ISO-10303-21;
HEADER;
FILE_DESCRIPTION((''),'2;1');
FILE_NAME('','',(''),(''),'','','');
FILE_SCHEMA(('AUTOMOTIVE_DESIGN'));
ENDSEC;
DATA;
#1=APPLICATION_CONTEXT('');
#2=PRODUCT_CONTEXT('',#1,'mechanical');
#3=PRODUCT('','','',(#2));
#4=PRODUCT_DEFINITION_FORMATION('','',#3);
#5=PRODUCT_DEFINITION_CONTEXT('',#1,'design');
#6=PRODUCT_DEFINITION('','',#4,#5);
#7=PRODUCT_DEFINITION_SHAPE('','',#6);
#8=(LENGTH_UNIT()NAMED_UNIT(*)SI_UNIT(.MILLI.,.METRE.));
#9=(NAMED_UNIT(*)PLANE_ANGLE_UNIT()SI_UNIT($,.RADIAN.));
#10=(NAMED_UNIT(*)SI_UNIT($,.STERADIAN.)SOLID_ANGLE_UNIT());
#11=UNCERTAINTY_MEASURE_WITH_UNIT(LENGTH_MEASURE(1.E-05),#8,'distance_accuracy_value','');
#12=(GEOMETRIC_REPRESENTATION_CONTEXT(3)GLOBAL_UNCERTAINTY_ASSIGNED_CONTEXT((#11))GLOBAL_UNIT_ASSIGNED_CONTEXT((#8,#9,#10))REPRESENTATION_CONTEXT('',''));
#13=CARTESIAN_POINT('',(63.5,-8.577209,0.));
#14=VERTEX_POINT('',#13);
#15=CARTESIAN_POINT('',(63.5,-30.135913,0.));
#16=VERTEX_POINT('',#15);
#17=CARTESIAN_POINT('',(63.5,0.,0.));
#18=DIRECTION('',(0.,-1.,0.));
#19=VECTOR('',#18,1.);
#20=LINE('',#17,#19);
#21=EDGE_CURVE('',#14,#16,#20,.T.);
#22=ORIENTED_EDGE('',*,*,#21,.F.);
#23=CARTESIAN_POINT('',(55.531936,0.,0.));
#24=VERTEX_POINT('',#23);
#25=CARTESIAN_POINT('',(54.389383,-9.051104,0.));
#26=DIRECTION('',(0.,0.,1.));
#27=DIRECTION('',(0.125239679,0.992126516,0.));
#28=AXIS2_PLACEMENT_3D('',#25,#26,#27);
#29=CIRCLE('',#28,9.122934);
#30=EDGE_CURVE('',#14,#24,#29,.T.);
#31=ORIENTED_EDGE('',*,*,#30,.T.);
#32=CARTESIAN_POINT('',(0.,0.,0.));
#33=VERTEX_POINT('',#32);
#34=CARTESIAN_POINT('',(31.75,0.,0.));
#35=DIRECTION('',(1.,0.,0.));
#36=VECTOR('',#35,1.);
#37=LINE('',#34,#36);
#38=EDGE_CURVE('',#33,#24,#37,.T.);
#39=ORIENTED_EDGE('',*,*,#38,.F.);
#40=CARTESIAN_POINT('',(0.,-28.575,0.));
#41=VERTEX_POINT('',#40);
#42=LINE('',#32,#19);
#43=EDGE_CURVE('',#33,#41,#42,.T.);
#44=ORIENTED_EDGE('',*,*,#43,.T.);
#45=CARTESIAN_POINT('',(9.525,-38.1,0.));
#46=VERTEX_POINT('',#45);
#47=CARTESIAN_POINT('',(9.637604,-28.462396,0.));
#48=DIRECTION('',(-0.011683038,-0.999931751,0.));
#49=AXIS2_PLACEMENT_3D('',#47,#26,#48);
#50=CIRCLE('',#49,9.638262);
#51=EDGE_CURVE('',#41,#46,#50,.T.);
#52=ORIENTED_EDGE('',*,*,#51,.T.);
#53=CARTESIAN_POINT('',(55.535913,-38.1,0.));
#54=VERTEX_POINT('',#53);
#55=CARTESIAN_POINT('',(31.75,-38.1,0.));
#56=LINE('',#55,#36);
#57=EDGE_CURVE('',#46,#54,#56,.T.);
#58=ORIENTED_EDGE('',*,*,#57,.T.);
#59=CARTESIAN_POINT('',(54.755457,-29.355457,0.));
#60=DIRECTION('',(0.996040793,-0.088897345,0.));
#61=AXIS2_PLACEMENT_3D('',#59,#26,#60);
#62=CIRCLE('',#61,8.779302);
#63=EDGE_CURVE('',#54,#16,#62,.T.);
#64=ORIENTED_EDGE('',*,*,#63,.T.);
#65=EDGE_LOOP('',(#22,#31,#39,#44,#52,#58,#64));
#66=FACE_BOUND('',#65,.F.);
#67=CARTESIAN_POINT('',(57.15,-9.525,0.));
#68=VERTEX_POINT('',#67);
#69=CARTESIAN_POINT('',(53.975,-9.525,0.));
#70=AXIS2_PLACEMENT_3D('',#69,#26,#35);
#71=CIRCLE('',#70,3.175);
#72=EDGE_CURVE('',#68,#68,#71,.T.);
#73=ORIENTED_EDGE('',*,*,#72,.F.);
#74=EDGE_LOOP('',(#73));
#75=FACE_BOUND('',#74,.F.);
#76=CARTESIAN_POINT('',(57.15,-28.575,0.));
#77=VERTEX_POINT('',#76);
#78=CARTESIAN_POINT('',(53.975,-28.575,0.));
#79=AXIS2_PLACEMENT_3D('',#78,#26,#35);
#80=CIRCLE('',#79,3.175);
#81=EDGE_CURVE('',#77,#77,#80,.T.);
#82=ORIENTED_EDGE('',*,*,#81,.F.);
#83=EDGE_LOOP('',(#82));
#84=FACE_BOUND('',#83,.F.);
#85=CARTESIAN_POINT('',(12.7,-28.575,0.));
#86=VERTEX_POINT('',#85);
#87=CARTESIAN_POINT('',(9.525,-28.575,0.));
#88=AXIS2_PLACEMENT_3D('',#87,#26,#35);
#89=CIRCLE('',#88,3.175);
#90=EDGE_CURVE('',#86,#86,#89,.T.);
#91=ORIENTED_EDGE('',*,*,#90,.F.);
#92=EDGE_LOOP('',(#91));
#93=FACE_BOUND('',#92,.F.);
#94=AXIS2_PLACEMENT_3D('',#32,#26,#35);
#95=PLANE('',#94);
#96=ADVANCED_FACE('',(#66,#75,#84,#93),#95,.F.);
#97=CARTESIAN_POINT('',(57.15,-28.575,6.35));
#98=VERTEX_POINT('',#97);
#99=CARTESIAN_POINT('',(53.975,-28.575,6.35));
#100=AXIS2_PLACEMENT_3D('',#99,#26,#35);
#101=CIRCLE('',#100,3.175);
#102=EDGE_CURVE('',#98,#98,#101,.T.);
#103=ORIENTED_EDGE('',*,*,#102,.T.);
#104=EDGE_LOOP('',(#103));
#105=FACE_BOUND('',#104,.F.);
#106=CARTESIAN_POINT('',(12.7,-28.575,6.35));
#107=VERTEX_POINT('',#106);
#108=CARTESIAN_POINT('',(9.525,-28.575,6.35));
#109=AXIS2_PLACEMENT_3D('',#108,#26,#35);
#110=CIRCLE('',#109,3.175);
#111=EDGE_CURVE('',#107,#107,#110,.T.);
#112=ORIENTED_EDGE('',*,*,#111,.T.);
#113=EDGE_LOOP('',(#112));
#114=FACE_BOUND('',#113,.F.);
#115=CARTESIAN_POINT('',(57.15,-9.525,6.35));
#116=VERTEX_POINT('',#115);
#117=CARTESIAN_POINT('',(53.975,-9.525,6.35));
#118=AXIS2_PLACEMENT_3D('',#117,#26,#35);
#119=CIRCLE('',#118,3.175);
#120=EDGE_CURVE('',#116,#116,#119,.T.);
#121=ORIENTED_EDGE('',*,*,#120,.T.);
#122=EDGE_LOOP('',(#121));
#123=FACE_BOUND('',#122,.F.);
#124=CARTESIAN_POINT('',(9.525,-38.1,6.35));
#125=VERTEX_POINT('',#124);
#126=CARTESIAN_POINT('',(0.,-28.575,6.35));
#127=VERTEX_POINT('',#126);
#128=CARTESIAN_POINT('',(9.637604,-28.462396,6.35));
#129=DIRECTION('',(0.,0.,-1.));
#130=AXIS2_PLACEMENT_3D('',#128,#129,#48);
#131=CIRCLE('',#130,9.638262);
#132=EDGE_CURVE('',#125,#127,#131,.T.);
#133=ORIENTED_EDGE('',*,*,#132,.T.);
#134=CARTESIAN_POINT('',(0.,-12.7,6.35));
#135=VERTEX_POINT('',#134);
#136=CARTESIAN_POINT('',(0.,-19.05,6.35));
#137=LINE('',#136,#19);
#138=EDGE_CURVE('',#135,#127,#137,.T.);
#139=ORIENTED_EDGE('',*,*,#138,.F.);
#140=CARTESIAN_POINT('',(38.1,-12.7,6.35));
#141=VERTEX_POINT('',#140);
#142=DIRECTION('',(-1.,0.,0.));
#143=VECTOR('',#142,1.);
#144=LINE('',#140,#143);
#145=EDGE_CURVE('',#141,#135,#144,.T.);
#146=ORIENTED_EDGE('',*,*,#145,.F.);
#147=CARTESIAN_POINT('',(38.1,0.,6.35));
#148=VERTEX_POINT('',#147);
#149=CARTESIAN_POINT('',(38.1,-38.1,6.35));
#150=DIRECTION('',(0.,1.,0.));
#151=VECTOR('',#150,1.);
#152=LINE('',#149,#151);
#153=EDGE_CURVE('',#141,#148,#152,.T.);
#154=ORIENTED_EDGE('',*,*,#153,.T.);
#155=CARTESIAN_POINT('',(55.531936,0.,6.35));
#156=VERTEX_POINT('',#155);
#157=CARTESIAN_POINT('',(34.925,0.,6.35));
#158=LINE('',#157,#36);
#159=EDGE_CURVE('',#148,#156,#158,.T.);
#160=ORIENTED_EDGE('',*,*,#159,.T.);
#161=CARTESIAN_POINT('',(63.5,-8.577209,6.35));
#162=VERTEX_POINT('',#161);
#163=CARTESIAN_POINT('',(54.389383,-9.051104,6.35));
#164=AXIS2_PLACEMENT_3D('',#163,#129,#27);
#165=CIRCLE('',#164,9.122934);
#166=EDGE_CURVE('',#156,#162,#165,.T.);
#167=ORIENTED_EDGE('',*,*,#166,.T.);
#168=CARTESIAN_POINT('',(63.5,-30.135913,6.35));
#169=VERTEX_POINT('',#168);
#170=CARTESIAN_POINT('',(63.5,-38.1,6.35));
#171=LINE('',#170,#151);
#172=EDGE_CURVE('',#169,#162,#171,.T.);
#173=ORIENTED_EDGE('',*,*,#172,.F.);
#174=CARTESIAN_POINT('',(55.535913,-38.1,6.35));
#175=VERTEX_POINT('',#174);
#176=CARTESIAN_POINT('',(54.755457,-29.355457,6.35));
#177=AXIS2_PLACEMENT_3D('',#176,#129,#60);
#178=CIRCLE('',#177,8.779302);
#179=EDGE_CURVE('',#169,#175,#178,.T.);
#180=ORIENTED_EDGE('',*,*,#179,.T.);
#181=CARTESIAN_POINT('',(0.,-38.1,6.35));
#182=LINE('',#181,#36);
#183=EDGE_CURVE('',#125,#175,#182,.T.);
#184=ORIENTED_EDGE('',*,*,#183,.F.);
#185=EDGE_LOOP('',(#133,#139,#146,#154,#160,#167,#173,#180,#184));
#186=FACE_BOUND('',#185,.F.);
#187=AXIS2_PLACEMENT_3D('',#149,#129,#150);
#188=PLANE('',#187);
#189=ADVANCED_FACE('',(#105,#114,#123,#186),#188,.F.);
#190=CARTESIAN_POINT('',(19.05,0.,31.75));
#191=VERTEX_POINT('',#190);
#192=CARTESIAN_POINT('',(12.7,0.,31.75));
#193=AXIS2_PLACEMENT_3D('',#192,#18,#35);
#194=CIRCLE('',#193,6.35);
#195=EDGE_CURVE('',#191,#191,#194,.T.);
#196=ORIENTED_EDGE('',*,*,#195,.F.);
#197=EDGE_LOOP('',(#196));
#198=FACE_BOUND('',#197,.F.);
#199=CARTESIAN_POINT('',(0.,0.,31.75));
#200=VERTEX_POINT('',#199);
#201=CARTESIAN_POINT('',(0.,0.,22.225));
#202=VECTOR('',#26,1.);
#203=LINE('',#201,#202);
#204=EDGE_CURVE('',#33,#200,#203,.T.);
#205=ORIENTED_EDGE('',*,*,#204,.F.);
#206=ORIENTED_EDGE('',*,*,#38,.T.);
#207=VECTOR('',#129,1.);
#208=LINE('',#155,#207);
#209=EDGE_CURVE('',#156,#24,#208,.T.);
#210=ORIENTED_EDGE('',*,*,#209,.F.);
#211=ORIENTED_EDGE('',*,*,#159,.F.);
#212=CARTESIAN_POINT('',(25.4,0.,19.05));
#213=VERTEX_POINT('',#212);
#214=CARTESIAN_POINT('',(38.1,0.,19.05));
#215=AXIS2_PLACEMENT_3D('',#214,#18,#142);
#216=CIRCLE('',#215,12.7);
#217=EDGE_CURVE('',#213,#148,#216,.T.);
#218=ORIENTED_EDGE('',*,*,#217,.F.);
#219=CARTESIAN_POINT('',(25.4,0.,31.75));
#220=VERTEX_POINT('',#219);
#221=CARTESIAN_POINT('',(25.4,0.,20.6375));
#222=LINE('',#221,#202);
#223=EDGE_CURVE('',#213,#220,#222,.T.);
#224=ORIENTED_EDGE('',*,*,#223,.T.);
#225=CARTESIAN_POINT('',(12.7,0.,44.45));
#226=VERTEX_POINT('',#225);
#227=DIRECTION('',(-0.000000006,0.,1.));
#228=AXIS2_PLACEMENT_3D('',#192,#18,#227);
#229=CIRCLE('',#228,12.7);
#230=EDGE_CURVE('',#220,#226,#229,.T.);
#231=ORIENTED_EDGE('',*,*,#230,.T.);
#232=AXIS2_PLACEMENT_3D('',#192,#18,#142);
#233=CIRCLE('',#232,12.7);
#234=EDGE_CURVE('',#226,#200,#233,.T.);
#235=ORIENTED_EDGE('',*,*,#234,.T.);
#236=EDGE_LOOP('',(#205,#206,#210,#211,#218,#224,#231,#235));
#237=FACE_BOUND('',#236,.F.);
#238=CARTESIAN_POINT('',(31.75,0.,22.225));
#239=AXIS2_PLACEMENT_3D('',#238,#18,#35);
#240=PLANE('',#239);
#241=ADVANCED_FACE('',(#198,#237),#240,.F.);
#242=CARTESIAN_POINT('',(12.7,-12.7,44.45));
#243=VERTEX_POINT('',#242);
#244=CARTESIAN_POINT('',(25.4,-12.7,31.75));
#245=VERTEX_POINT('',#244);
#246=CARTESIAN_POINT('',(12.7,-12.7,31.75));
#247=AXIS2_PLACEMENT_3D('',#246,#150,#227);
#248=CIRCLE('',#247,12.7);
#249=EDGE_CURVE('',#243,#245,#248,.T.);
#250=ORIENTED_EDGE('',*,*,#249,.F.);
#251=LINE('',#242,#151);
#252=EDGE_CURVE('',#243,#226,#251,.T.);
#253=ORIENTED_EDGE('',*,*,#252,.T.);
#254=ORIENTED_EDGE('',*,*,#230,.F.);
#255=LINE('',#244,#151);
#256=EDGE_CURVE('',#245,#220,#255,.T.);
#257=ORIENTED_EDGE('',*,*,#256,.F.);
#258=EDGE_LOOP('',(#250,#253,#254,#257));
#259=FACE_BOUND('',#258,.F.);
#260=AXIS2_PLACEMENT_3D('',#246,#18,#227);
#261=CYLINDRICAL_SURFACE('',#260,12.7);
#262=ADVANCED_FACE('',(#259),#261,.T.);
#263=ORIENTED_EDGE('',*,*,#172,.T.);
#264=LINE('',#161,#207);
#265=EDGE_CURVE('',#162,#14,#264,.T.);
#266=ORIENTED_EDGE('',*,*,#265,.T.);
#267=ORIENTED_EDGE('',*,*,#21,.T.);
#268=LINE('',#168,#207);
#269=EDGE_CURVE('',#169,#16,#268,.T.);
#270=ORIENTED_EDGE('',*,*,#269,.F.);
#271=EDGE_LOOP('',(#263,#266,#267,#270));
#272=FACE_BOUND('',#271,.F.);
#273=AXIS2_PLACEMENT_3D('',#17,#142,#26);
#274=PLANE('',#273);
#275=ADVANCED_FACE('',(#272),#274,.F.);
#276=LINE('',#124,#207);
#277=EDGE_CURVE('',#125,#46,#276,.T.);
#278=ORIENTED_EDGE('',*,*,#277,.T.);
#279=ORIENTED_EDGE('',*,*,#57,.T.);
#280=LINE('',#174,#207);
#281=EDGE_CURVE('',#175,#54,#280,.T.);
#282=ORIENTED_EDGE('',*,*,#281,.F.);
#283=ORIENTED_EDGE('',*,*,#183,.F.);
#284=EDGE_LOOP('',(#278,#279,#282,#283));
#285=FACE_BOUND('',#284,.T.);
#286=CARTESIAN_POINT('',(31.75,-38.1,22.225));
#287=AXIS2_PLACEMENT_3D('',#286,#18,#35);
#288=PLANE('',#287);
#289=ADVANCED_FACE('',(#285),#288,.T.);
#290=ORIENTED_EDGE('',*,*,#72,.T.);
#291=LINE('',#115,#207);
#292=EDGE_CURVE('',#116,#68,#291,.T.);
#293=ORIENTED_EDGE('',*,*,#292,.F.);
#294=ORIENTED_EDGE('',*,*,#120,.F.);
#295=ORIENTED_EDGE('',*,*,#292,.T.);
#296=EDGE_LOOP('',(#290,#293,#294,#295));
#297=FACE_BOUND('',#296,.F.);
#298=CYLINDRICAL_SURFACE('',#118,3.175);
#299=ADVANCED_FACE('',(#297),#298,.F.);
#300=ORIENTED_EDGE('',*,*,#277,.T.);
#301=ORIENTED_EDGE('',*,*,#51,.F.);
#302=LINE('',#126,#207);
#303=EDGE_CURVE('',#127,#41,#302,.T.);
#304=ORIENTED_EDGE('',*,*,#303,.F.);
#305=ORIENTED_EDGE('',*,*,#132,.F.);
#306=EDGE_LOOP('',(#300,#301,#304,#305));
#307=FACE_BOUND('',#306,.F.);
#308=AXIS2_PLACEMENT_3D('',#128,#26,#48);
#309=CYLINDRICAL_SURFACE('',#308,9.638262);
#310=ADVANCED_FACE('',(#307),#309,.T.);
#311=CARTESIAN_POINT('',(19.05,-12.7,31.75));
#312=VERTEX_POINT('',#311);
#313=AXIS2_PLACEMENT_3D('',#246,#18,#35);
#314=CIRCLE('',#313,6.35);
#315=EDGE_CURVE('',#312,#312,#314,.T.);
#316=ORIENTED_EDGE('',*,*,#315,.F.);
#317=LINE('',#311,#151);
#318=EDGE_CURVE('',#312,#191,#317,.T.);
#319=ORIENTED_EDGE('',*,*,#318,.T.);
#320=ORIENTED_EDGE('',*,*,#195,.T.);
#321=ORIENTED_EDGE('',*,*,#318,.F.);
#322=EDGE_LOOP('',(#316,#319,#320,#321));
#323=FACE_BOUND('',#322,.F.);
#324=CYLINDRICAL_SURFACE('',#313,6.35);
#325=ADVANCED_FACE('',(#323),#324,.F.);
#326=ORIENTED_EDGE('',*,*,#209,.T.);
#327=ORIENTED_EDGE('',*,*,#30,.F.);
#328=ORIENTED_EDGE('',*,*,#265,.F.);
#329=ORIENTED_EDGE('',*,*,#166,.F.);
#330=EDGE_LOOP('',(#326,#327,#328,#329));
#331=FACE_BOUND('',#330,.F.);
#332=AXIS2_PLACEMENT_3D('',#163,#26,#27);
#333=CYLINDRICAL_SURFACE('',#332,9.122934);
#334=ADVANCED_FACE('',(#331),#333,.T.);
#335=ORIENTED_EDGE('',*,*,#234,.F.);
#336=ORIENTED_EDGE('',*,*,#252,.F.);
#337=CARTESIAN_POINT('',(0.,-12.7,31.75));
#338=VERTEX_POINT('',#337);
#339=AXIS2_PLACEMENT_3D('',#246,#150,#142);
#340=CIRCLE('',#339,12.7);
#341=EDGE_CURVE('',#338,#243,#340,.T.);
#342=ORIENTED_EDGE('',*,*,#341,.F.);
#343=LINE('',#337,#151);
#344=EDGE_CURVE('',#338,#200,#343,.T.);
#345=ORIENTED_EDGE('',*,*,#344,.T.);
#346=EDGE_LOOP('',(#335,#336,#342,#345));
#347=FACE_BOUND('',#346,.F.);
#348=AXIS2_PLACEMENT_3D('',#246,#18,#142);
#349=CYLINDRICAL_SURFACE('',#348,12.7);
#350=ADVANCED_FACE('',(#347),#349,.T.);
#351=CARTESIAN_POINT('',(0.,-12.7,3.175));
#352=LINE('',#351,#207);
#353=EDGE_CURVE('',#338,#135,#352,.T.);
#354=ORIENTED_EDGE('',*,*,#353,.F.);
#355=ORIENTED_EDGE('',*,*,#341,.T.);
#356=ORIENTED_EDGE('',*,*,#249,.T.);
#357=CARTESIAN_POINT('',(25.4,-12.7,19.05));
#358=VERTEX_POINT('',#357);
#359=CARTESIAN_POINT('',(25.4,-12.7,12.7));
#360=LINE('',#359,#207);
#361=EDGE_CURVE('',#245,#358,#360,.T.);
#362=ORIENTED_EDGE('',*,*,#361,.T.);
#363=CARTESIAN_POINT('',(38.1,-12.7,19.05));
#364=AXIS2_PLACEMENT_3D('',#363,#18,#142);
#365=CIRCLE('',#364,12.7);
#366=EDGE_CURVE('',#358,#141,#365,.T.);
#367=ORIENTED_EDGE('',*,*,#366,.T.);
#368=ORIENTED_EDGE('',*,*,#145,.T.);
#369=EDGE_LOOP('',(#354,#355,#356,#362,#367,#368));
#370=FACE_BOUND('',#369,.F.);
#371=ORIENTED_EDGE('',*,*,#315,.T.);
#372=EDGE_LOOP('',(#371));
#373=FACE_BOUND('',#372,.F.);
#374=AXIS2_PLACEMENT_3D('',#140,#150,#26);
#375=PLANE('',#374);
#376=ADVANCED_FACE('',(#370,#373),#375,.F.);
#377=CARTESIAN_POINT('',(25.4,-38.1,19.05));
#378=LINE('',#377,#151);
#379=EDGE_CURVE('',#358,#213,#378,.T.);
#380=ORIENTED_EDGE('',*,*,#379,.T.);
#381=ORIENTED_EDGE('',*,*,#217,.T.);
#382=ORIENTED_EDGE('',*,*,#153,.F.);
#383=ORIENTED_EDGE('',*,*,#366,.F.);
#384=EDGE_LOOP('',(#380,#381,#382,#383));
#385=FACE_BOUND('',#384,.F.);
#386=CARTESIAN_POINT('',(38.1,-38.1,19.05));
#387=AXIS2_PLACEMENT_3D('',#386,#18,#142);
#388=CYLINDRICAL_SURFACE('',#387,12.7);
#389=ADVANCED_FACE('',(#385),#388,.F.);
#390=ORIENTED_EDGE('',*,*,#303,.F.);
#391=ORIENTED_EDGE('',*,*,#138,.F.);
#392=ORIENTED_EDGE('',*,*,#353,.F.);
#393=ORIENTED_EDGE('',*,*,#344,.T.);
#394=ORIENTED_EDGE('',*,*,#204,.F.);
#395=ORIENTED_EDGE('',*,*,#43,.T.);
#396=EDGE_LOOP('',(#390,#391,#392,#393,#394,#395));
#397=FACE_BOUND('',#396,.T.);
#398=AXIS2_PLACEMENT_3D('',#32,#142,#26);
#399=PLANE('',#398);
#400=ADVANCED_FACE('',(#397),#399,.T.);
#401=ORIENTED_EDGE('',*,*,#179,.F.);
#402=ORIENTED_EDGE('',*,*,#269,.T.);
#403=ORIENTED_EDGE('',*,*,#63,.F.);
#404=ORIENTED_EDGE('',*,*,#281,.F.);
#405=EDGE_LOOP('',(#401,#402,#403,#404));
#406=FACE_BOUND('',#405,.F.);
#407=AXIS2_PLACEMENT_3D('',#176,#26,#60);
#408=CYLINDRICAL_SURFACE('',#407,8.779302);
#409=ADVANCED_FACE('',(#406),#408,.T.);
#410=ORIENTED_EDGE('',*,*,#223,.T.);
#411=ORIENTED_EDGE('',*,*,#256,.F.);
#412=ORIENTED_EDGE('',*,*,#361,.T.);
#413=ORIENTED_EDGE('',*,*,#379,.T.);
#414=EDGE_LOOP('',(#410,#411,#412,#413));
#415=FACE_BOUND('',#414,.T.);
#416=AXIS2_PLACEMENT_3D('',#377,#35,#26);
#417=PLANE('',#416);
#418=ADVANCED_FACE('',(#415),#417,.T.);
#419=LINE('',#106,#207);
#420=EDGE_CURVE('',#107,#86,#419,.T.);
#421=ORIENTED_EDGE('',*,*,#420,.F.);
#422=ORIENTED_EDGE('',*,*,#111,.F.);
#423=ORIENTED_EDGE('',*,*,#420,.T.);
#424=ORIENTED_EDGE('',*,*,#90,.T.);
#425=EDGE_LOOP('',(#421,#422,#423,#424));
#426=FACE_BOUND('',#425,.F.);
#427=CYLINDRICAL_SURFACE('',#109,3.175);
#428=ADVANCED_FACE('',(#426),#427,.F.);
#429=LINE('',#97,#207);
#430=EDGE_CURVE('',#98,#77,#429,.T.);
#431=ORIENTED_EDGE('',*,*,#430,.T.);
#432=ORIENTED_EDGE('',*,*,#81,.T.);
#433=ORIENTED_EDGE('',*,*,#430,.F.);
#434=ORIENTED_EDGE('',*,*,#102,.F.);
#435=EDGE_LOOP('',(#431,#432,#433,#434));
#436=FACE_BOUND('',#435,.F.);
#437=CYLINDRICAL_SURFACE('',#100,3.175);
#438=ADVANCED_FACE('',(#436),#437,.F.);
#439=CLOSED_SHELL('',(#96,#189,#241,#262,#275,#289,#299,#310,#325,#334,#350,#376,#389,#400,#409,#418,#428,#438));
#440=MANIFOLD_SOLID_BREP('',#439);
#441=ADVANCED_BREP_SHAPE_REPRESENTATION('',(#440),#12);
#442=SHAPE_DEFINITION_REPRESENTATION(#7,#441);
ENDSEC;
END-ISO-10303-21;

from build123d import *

# Parameters (mm, degrees)
F0_W      = 63.5
F0_H      = 44.45
F1_DEPTH  = 38.1
F2_W      = 25.4
F2_H      = 38.1
F3_DEPTH  = 38.101
F5_W      = 25.4
F5_H      = 38.1
F6_DEPTH  = 38.101
F4_W      = 12.7
F4_H      = 25.4
F7_DEPTH  = 38.101
F8_R      = 6.35
F9_DEPTH  = 12.701
F10_R     = 3.175
F11_DEPTH = 6.351


# Not quite as in the source:
# - a feature names something its author has since deleted; it is built from what else it names


with BuildPart() as f1:
    # F0 (on Front) → F1 (new body)
    with BuildSketch(Plane.XZ):
        with Locations((31.75, 22.225)):
            Rectangle(F0_W, F0_H)
    extrude(amount=F1_DEPTH)

    # F2 (on face) → F3 (cut, through all)
    with BuildSketch(Plane.XZ.offset(38.1)):
        with Locations((50.8, 25.4)):
            Rectangle(F2_W, F2_H)
    extrude(amount=-F3_DEPTH, mode=Mode.SUBTRACT)

    # F5 (on face) → F6 (cut, through all)
    with BuildSketch(Plane.YZ.offset(38.1)):
        with Locations((-25.4, 25.4)):
            Rectangle(F5_W, F5_H)
    extrude(amount=-F6_DEPTH, mode=Mode.SUBTRACT)

    # F4 (on face) → F7 (cut, through all)
    with BuildSketch(Plane.XZ.offset(38.1)):
        with Locations((31.75, 31.75)):
            Rectangle(F4_W, F4_H)
        with BuildLine():
            Line((38.1, 19.05), (25.4, 19.05))
            ThreePointArc((25.4, 19.05), (29.1197438789, 10.0697438789), (38.1, 6.35))
            Line((38.1, 6.35), (38.1, 19.05))
        make_face()
    extrude(amount=-F7_DEPTH, mode=Mode.SUBTRACT)

    # F8 (on face) → F9 (cut, through all)
    with BuildSketch(Plane.XZ.offset(12.7)):
        with Locations((12.7, 31.75)):
            Circle(F8_R)
        with BuildLine():
            ThreePointArc((12.6999999213, 44.45), (21.6802560932, 40.7302561489), (25.4, 31.75))
            Line((25.4, 31.75), (25.4, 44.45))
            Line((25.4, 44.45), (12.6999999213, 44.45))
        make_face()
        with BuildLine():
            ThreePointArc((0, 31.75), (3.7197438511, 40.7302560932), (12.6999999213, 44.45))
            Line((12.6999999213, 44.45), (0, 44.45))
            Line((0, 44.45), (0, 31.75))
        make_face()
    extrude(amount=-F9_DEPTH, mode=Mode.SUBTRACT)

    # F10 (on face) → F11 (cut, through all)
    with BuildSketch(Plane.XY.offset(6.35)):
        with BuildLine():
            Line((63.5, 0), (55.5319362459, 0))
            ThreePointArc((55.5319362459, 0), (61.0732443905, -2.8419244619), (63.5, -8.5772089198))
            Line((63.5, -8.5772089198), (63.5, 0))
        make_face()
        with BuildLine():
            ThreePointArc((63.5, -30.1359133542), (60.963360935, -35.563360935), (55.5359133542, -38.1))
            Line((55.5359133542, -38.1), (63.5, -38.1))
            Line((63.5, -38.1), (63.5, -30.1359133542))
        make_face()
        with BuildLine():
            ThreePointArc((9.525, -38.1), (2.8223237752, -35.2776762248), (0, -28.575))
            Line((0, -28.575), (0, -38.1))
            Line((0, -38.1), (9.525, -38.1))
        make_face()
        with Locations((9.525, -28.575)):
            Circle(F10_R)
        with Locations((53.975, -28.575)):
            Circle(F10_R)
        with Locations((53.975, -9.525)):
            Circle(F10_R)
    extrude(amount=-F11_DEPTH, mode=Mode.SUBTRACT)


solid = f1.part
